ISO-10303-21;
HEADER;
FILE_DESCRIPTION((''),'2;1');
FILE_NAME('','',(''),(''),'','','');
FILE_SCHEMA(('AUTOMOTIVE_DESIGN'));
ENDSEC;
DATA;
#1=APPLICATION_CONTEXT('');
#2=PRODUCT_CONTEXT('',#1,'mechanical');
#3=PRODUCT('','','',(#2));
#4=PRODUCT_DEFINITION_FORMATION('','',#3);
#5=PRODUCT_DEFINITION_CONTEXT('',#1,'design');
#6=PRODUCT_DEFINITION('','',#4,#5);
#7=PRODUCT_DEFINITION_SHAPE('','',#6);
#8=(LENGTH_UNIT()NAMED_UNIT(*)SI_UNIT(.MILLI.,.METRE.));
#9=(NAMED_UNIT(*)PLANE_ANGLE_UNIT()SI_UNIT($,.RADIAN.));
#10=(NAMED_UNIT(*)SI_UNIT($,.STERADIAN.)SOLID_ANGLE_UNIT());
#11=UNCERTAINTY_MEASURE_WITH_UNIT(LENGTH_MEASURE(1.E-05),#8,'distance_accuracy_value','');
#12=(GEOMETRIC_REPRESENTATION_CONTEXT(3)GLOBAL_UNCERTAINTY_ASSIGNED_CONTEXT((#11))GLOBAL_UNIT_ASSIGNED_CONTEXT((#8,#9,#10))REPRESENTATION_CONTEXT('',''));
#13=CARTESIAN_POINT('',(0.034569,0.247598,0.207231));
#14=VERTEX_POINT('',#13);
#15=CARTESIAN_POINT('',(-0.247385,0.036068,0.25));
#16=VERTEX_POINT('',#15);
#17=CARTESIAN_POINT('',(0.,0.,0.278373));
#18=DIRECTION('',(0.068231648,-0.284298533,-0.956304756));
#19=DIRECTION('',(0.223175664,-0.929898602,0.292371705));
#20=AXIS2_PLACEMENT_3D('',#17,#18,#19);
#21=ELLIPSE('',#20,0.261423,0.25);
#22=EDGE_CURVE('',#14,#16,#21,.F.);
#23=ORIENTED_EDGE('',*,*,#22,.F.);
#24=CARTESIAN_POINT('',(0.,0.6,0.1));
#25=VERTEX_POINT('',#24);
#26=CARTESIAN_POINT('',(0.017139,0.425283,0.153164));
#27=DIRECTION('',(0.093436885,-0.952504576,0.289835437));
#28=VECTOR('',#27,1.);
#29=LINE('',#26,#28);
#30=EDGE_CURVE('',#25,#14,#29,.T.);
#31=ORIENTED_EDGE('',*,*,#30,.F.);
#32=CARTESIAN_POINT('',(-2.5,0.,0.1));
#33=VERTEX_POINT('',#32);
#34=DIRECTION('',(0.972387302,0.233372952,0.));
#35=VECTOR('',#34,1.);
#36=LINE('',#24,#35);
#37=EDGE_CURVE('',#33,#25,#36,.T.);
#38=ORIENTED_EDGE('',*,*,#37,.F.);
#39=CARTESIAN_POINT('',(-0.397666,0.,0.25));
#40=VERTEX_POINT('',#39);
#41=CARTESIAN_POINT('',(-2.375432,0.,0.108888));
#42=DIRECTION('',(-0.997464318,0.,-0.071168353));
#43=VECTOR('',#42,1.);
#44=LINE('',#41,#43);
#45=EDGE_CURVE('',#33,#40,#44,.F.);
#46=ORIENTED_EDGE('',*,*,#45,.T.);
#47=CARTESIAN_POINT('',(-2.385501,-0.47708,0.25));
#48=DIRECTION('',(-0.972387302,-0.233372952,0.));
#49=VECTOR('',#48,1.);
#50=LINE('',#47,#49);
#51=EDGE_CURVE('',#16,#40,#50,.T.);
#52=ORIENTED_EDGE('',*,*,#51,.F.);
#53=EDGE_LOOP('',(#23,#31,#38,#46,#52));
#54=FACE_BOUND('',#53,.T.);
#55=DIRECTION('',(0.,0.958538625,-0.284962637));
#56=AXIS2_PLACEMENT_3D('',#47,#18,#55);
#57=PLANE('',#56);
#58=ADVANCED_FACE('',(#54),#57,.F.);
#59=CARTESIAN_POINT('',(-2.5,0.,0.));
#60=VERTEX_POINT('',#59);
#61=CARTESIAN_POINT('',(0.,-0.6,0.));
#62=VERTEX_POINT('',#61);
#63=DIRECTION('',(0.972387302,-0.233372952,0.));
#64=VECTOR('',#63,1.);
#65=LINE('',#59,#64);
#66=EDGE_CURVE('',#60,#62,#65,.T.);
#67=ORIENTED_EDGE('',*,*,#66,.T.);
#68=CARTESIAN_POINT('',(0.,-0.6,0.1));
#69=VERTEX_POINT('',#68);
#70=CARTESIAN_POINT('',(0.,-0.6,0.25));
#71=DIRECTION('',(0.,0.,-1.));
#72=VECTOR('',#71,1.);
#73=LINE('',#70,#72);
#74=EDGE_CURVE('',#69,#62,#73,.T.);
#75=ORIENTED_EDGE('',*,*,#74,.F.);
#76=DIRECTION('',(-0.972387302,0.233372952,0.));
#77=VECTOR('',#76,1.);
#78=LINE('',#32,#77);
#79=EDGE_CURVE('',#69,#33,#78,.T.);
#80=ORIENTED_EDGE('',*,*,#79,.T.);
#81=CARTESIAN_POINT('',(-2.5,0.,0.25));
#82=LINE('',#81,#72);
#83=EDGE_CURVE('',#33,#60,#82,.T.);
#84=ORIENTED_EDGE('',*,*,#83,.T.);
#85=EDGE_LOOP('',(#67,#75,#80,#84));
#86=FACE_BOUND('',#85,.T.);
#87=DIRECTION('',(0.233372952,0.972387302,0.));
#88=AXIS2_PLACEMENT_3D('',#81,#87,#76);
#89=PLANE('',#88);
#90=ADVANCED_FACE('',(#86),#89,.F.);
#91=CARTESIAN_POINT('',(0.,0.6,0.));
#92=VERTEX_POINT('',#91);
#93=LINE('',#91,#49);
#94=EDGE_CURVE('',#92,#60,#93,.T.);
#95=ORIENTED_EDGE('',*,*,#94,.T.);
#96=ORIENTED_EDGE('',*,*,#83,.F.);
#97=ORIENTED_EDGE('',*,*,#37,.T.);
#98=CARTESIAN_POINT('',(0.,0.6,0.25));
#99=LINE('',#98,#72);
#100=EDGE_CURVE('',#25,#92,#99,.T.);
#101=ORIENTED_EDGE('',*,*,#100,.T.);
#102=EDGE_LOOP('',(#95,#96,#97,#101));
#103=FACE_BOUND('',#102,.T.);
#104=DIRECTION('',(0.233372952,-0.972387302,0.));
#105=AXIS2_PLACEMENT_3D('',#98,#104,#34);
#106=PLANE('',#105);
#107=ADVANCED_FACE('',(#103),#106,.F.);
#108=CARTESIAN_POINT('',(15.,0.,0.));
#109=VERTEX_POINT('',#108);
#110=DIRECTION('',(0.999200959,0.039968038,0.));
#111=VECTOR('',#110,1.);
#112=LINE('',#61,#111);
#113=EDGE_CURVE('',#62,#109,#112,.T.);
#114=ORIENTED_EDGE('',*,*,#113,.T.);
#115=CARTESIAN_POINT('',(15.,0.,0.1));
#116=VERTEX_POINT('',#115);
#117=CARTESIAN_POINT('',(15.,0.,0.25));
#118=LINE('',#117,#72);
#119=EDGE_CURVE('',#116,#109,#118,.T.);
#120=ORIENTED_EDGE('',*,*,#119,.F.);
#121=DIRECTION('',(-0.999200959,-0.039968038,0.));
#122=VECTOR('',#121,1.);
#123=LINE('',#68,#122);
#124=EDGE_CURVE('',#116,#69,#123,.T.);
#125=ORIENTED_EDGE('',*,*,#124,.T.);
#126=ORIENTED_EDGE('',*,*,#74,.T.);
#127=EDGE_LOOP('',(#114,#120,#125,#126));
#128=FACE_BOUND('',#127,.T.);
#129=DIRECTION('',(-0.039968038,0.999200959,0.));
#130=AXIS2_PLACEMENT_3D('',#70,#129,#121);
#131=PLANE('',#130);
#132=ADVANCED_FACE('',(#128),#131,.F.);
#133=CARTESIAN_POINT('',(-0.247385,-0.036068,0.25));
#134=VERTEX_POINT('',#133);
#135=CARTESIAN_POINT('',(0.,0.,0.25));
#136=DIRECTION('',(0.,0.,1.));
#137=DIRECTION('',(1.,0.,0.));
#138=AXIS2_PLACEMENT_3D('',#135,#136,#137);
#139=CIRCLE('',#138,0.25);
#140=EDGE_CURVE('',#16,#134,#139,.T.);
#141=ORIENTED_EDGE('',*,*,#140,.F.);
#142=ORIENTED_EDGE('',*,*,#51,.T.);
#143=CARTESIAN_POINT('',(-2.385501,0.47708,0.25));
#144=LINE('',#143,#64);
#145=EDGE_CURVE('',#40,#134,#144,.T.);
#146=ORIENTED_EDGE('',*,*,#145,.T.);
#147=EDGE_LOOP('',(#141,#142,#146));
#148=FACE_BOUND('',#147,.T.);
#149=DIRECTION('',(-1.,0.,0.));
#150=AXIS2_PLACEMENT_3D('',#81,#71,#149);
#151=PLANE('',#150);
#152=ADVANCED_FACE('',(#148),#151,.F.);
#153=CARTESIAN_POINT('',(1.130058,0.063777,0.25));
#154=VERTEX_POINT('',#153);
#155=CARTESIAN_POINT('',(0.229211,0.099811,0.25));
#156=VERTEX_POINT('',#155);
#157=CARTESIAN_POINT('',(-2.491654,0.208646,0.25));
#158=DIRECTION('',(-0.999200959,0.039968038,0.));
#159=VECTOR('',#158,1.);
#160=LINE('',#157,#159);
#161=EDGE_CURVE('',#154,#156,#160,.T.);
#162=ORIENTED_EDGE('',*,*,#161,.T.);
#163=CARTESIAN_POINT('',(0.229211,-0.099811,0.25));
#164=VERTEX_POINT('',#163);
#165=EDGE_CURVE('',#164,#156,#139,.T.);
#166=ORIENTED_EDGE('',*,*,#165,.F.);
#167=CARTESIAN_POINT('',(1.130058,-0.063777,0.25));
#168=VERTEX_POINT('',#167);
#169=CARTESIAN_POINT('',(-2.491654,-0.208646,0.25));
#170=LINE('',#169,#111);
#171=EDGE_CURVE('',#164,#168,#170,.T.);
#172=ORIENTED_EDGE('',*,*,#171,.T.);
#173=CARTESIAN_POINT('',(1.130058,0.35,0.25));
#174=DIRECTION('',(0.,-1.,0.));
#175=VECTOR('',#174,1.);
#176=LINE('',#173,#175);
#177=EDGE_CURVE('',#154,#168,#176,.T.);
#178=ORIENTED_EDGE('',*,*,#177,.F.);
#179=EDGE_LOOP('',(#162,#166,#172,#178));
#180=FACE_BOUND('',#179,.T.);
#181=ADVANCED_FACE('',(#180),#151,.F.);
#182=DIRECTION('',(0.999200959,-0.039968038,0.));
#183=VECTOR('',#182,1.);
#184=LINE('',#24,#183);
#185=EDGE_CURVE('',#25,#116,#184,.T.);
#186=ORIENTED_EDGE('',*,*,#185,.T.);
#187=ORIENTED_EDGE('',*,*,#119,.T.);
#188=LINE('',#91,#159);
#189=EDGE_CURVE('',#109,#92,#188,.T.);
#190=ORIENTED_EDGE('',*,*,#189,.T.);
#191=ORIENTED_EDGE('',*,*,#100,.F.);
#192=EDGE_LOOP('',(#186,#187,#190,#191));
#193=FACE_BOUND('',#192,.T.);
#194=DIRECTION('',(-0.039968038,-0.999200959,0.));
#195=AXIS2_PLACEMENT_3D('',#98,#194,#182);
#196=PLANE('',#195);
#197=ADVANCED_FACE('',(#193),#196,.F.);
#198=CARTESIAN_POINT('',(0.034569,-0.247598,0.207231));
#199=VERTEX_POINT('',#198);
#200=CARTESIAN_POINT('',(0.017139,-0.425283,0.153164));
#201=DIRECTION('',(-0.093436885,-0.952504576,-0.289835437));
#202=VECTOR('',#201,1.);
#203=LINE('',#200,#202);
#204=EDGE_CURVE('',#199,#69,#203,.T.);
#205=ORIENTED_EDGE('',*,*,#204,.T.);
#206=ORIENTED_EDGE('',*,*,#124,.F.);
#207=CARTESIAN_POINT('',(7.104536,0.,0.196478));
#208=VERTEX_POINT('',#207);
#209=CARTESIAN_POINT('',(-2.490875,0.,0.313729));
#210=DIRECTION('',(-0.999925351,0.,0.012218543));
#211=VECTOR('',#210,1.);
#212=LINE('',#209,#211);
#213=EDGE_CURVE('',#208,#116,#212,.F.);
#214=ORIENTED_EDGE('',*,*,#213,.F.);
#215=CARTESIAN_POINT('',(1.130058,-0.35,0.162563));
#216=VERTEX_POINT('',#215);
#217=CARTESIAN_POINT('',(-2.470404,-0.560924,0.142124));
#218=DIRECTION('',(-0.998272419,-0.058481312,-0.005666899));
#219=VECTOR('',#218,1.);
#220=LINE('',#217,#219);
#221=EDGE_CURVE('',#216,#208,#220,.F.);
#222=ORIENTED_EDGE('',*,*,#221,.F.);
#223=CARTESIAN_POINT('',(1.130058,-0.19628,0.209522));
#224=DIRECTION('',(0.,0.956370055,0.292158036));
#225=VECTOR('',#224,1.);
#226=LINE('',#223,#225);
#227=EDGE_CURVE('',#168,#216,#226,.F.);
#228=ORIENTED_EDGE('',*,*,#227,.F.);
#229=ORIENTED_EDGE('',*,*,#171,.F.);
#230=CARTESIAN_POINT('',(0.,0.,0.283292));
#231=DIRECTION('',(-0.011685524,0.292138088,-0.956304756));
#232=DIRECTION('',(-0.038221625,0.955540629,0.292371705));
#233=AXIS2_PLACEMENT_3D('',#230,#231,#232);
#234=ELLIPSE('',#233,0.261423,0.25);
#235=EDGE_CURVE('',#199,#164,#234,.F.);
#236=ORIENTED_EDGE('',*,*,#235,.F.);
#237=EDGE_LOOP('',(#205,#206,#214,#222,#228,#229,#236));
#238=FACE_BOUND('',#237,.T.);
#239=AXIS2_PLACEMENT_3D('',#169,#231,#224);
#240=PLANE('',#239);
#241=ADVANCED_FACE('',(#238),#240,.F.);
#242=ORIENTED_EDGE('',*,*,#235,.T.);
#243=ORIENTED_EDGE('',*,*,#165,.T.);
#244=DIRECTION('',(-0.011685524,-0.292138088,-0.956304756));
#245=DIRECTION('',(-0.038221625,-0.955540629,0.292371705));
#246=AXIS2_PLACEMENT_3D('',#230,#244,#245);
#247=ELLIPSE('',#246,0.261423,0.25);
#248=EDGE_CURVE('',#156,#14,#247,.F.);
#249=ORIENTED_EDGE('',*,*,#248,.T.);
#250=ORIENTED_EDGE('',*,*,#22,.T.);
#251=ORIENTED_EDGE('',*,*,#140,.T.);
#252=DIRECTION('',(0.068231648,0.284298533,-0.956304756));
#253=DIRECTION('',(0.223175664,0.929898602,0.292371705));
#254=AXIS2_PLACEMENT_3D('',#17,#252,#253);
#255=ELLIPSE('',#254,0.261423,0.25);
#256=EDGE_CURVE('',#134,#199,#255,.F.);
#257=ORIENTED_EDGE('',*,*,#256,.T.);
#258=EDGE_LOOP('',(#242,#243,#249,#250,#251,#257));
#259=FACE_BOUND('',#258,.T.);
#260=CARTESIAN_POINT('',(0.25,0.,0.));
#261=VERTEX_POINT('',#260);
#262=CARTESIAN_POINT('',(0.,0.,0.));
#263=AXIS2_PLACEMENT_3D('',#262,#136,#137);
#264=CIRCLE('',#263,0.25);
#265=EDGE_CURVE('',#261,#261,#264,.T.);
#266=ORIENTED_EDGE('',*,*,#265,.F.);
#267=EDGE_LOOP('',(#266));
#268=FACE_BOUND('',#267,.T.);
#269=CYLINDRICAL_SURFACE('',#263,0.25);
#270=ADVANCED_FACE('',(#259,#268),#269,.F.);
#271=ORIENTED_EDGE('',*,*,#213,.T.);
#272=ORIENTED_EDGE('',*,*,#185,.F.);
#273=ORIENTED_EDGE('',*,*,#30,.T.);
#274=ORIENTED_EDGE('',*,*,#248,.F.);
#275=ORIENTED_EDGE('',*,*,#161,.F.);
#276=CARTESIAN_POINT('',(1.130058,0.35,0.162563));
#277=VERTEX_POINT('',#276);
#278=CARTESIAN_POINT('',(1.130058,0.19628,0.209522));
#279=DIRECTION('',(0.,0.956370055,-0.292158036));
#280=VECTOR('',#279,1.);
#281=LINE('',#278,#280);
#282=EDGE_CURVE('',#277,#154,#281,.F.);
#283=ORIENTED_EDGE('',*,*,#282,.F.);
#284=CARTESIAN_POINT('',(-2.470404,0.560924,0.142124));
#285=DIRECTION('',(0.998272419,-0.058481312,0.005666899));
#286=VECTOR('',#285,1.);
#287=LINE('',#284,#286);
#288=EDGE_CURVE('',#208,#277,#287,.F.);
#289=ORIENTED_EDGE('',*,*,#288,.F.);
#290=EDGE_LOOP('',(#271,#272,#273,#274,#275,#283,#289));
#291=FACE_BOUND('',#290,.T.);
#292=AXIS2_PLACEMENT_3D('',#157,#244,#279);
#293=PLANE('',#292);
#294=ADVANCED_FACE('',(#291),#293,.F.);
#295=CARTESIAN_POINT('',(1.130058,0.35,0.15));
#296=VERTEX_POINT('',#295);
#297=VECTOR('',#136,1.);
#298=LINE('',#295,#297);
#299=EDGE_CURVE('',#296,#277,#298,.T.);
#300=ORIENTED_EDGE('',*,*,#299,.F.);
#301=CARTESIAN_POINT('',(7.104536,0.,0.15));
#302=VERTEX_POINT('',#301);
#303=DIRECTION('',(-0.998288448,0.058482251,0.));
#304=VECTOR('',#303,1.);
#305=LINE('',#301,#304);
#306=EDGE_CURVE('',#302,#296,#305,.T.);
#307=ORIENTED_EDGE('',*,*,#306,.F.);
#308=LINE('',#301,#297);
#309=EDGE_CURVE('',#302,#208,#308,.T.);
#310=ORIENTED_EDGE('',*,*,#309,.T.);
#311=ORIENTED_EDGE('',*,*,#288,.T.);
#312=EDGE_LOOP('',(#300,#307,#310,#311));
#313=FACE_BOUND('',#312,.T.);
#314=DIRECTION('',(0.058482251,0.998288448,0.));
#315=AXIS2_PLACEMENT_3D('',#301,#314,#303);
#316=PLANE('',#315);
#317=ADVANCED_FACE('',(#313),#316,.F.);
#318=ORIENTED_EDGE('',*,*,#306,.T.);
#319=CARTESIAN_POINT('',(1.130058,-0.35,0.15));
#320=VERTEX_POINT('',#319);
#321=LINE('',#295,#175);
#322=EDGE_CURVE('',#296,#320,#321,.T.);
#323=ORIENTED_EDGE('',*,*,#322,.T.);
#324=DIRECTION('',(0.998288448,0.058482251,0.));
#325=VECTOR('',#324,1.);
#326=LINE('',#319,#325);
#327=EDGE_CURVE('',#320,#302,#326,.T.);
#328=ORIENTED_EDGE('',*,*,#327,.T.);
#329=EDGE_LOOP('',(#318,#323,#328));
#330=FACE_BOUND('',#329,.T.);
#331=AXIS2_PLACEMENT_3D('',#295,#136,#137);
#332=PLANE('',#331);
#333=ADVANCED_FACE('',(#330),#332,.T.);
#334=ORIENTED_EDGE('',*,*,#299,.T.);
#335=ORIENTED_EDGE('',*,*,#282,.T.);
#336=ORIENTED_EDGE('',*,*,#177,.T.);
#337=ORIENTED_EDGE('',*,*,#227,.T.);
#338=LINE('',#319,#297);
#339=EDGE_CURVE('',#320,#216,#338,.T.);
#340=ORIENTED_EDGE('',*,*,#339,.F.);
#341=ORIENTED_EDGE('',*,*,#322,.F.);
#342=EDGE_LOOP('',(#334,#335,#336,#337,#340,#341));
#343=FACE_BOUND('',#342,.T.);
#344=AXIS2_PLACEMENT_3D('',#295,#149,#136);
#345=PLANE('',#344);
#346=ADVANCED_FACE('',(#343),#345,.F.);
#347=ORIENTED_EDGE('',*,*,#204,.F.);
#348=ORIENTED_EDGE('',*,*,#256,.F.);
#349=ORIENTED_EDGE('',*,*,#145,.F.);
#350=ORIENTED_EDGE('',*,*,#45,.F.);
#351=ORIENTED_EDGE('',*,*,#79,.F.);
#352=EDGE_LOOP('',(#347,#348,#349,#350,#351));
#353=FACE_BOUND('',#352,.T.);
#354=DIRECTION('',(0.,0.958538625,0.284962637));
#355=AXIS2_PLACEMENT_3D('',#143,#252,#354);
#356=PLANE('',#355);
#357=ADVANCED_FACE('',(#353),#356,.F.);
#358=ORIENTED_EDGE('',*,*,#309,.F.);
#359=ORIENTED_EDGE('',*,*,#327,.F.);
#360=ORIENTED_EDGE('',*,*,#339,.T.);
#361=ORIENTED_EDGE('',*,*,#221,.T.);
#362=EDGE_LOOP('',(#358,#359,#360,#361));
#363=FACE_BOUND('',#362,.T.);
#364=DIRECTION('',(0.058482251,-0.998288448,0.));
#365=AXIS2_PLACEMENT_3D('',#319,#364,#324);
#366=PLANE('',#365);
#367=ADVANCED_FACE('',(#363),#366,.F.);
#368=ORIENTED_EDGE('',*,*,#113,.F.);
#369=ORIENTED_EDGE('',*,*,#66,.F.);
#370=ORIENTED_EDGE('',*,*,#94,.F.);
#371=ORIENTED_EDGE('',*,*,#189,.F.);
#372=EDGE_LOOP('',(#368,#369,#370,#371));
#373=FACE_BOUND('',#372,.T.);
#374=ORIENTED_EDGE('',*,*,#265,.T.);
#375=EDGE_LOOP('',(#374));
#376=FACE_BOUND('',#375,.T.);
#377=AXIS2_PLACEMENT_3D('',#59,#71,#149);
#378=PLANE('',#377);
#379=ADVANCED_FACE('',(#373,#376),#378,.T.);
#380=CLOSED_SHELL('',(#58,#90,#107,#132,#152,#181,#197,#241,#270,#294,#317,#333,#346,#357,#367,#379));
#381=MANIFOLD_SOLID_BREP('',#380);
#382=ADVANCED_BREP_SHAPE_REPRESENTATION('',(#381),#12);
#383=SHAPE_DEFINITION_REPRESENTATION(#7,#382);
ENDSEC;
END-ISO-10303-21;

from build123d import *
from OCP.BRepFilletAPI import BRepFilletAPI_MakeChamfer

# Parameters (mm, degrees)
BOSS_EXTRUDE1_DEPTH = 0.25
SKETCH2_R           = 0.25
CUT_EXTRUDE1_DEPTH  = 0.25
CHAMFER2_SIZE       = 0.15
CHAMFER2_SIZE2      = 0.490627893
CUT_EXTRUDE2_DEPTH  = 0.1


with BuildPart() as part:
    # Sketch1 → Boss-Extrude1 (new body)
    with BuildSketch(Plane.XY):
        Polygon((0, 0.6), (-2.5, 0), (0, -0.6), (15, 0), align=None)
    extrude(amount=BOSS_EXTRUDE1_DEPTH)

    # Sketch2 → Cut-Extrude1 (cut)
    with BuildSketch(Plane.XY.offset(0.25)):
        Circle(SKETCH2_R)
    extrude(amount=-CUT_EXTRUDE1_DEPTH, mode=Mode.SUBTRACT)

    # Chamfer1
    # the kernel refuses this chamfer: 0.490627893, 0.15 mm, written as the material it takes off along each edge
    with BuildSketch(Plane(origin=(18.054124469, -0.122164979, 0.25), x_dir=(0.004781856159263962, 0.1195464039815991, -0.9928170985366542), z_dir=(-0.9992009587217895, 0.039968038348871575, 0))) as chamfer1_piece_1:
        with BuildLine():
            Line((0.156864571, 0), (-0.06664171, 0.505050061))
            Line((-0.06664171, 0.505050061), (-0.076383785, 0.503876067))
            ThreePointArc((-0.076383785, 0.503876067), (-0.040214623, 0.251694279), (-0.009742075, -0.001173994))
            Line((-0.009742075, -0.001173994), (0.001173994, -0.009742075))
            ThreePointArc((0.001173994, -0.009742075), (0.078483584, -0.000425682), (0.158038565, -0.009742075))
            Line((0.158038565, -0.009742075), (0.156864571, 0))
        make_face()
    extrude(amount=21.125128788, mode=Mode.SUBTRACT)
    with BuildSketch(Plane(origin=(-3.054124469, -0.722164979, 0.25), x_dir=(-0.039965503065755754, 0.999137576643894, 0.011263281176818171), z_dir=(0.9992009587217895, 0.039968038348871575, 0))) as chamfer1_piece_2:
        with BuildLine():
            Line((0.509427799, 0), (-0.02052052, -0.155516565))
            Line((-0.02052052, -0.155516565), (-0.030332455, -0.155406043))
            ThreePointArc((-0.030332455, -0.155406043), (-0.010688995, -0.077753453), (-0.009811935, 0.000110522))
            Line((-0.009811935, 0.000110522), (0.000110522, 0.009811935))
            ThreePointArc((0.000110522, 0.009811935), (0.254792108, 0.006943203), (0.50953832, 0.009811935))
            Line((0.50953832, 0.009811935), (0.509427799, 0))
        make_face()
    extrude(amount=21.125128788, mode=Mode.SUBTRACT)

    # Chamfer2: one chamfer whose edges measure the first distance from different faces: ONE call of the kernel's chamfer builder (chamfer() names one face for all edges)
    chamfer2_edges_1 = [part.edges().sort_by_distance(p)[0] for p in [
        (-2.126821854, 0.089562755, 0.25),
    ]]
    chamfer2_side_1 = [part.faces().sort_by_distance(p)[0] for p in [
        (-1.427358804, 0.257433887, 0.105010717),
    ]]
    chamfer2_edges_2 = [part.edges().sort_by_distance(p)[0] for p in [
        (-2.126821854, -0.089562755, 0.25),
    ]]
    chamfer2_side_2 = [part.faces().sort_by_distance(p)[0] for p in [
        (-1.427358804, -0.257433887, 0.105010717),
    ]]
    chamfer2 = BRepFilletAPI_MakeChamfer(part.part.solid().wrapped)
    for e in chamfer2_edges_1:
        chamfer2.Add(CHAMFER2_SIZE, CHAMFER2_SIZE2, e.wrapped, chamfer2_side_1[0].wrapped)  # the first distance lies on this face
    for e in chamfer2_edges_2:
        chamfer2.Add(CHAMFER2_SIZE, CHAMFER2_SIZE2, e.wrapped, chamfer2_side_2[0].wrapped)  # the first distance lies on this face
    add(Compound.cast(chamfer2.Shape()), mode=Mode.REPLACE)

    # Sketch3 → Cut-Extrude2 (cut)
    with BuildSketch(Plane.XY.offset(0.25)):
        Polygon((1.130057814, 0.35), (1.130057814, -0.35), (7.104536448, 0), align=None)
    extrude(amount=-CUT_EXTRUDE2_DEPTH, mode=Mode.SUBTRACT)


solid = part.part
